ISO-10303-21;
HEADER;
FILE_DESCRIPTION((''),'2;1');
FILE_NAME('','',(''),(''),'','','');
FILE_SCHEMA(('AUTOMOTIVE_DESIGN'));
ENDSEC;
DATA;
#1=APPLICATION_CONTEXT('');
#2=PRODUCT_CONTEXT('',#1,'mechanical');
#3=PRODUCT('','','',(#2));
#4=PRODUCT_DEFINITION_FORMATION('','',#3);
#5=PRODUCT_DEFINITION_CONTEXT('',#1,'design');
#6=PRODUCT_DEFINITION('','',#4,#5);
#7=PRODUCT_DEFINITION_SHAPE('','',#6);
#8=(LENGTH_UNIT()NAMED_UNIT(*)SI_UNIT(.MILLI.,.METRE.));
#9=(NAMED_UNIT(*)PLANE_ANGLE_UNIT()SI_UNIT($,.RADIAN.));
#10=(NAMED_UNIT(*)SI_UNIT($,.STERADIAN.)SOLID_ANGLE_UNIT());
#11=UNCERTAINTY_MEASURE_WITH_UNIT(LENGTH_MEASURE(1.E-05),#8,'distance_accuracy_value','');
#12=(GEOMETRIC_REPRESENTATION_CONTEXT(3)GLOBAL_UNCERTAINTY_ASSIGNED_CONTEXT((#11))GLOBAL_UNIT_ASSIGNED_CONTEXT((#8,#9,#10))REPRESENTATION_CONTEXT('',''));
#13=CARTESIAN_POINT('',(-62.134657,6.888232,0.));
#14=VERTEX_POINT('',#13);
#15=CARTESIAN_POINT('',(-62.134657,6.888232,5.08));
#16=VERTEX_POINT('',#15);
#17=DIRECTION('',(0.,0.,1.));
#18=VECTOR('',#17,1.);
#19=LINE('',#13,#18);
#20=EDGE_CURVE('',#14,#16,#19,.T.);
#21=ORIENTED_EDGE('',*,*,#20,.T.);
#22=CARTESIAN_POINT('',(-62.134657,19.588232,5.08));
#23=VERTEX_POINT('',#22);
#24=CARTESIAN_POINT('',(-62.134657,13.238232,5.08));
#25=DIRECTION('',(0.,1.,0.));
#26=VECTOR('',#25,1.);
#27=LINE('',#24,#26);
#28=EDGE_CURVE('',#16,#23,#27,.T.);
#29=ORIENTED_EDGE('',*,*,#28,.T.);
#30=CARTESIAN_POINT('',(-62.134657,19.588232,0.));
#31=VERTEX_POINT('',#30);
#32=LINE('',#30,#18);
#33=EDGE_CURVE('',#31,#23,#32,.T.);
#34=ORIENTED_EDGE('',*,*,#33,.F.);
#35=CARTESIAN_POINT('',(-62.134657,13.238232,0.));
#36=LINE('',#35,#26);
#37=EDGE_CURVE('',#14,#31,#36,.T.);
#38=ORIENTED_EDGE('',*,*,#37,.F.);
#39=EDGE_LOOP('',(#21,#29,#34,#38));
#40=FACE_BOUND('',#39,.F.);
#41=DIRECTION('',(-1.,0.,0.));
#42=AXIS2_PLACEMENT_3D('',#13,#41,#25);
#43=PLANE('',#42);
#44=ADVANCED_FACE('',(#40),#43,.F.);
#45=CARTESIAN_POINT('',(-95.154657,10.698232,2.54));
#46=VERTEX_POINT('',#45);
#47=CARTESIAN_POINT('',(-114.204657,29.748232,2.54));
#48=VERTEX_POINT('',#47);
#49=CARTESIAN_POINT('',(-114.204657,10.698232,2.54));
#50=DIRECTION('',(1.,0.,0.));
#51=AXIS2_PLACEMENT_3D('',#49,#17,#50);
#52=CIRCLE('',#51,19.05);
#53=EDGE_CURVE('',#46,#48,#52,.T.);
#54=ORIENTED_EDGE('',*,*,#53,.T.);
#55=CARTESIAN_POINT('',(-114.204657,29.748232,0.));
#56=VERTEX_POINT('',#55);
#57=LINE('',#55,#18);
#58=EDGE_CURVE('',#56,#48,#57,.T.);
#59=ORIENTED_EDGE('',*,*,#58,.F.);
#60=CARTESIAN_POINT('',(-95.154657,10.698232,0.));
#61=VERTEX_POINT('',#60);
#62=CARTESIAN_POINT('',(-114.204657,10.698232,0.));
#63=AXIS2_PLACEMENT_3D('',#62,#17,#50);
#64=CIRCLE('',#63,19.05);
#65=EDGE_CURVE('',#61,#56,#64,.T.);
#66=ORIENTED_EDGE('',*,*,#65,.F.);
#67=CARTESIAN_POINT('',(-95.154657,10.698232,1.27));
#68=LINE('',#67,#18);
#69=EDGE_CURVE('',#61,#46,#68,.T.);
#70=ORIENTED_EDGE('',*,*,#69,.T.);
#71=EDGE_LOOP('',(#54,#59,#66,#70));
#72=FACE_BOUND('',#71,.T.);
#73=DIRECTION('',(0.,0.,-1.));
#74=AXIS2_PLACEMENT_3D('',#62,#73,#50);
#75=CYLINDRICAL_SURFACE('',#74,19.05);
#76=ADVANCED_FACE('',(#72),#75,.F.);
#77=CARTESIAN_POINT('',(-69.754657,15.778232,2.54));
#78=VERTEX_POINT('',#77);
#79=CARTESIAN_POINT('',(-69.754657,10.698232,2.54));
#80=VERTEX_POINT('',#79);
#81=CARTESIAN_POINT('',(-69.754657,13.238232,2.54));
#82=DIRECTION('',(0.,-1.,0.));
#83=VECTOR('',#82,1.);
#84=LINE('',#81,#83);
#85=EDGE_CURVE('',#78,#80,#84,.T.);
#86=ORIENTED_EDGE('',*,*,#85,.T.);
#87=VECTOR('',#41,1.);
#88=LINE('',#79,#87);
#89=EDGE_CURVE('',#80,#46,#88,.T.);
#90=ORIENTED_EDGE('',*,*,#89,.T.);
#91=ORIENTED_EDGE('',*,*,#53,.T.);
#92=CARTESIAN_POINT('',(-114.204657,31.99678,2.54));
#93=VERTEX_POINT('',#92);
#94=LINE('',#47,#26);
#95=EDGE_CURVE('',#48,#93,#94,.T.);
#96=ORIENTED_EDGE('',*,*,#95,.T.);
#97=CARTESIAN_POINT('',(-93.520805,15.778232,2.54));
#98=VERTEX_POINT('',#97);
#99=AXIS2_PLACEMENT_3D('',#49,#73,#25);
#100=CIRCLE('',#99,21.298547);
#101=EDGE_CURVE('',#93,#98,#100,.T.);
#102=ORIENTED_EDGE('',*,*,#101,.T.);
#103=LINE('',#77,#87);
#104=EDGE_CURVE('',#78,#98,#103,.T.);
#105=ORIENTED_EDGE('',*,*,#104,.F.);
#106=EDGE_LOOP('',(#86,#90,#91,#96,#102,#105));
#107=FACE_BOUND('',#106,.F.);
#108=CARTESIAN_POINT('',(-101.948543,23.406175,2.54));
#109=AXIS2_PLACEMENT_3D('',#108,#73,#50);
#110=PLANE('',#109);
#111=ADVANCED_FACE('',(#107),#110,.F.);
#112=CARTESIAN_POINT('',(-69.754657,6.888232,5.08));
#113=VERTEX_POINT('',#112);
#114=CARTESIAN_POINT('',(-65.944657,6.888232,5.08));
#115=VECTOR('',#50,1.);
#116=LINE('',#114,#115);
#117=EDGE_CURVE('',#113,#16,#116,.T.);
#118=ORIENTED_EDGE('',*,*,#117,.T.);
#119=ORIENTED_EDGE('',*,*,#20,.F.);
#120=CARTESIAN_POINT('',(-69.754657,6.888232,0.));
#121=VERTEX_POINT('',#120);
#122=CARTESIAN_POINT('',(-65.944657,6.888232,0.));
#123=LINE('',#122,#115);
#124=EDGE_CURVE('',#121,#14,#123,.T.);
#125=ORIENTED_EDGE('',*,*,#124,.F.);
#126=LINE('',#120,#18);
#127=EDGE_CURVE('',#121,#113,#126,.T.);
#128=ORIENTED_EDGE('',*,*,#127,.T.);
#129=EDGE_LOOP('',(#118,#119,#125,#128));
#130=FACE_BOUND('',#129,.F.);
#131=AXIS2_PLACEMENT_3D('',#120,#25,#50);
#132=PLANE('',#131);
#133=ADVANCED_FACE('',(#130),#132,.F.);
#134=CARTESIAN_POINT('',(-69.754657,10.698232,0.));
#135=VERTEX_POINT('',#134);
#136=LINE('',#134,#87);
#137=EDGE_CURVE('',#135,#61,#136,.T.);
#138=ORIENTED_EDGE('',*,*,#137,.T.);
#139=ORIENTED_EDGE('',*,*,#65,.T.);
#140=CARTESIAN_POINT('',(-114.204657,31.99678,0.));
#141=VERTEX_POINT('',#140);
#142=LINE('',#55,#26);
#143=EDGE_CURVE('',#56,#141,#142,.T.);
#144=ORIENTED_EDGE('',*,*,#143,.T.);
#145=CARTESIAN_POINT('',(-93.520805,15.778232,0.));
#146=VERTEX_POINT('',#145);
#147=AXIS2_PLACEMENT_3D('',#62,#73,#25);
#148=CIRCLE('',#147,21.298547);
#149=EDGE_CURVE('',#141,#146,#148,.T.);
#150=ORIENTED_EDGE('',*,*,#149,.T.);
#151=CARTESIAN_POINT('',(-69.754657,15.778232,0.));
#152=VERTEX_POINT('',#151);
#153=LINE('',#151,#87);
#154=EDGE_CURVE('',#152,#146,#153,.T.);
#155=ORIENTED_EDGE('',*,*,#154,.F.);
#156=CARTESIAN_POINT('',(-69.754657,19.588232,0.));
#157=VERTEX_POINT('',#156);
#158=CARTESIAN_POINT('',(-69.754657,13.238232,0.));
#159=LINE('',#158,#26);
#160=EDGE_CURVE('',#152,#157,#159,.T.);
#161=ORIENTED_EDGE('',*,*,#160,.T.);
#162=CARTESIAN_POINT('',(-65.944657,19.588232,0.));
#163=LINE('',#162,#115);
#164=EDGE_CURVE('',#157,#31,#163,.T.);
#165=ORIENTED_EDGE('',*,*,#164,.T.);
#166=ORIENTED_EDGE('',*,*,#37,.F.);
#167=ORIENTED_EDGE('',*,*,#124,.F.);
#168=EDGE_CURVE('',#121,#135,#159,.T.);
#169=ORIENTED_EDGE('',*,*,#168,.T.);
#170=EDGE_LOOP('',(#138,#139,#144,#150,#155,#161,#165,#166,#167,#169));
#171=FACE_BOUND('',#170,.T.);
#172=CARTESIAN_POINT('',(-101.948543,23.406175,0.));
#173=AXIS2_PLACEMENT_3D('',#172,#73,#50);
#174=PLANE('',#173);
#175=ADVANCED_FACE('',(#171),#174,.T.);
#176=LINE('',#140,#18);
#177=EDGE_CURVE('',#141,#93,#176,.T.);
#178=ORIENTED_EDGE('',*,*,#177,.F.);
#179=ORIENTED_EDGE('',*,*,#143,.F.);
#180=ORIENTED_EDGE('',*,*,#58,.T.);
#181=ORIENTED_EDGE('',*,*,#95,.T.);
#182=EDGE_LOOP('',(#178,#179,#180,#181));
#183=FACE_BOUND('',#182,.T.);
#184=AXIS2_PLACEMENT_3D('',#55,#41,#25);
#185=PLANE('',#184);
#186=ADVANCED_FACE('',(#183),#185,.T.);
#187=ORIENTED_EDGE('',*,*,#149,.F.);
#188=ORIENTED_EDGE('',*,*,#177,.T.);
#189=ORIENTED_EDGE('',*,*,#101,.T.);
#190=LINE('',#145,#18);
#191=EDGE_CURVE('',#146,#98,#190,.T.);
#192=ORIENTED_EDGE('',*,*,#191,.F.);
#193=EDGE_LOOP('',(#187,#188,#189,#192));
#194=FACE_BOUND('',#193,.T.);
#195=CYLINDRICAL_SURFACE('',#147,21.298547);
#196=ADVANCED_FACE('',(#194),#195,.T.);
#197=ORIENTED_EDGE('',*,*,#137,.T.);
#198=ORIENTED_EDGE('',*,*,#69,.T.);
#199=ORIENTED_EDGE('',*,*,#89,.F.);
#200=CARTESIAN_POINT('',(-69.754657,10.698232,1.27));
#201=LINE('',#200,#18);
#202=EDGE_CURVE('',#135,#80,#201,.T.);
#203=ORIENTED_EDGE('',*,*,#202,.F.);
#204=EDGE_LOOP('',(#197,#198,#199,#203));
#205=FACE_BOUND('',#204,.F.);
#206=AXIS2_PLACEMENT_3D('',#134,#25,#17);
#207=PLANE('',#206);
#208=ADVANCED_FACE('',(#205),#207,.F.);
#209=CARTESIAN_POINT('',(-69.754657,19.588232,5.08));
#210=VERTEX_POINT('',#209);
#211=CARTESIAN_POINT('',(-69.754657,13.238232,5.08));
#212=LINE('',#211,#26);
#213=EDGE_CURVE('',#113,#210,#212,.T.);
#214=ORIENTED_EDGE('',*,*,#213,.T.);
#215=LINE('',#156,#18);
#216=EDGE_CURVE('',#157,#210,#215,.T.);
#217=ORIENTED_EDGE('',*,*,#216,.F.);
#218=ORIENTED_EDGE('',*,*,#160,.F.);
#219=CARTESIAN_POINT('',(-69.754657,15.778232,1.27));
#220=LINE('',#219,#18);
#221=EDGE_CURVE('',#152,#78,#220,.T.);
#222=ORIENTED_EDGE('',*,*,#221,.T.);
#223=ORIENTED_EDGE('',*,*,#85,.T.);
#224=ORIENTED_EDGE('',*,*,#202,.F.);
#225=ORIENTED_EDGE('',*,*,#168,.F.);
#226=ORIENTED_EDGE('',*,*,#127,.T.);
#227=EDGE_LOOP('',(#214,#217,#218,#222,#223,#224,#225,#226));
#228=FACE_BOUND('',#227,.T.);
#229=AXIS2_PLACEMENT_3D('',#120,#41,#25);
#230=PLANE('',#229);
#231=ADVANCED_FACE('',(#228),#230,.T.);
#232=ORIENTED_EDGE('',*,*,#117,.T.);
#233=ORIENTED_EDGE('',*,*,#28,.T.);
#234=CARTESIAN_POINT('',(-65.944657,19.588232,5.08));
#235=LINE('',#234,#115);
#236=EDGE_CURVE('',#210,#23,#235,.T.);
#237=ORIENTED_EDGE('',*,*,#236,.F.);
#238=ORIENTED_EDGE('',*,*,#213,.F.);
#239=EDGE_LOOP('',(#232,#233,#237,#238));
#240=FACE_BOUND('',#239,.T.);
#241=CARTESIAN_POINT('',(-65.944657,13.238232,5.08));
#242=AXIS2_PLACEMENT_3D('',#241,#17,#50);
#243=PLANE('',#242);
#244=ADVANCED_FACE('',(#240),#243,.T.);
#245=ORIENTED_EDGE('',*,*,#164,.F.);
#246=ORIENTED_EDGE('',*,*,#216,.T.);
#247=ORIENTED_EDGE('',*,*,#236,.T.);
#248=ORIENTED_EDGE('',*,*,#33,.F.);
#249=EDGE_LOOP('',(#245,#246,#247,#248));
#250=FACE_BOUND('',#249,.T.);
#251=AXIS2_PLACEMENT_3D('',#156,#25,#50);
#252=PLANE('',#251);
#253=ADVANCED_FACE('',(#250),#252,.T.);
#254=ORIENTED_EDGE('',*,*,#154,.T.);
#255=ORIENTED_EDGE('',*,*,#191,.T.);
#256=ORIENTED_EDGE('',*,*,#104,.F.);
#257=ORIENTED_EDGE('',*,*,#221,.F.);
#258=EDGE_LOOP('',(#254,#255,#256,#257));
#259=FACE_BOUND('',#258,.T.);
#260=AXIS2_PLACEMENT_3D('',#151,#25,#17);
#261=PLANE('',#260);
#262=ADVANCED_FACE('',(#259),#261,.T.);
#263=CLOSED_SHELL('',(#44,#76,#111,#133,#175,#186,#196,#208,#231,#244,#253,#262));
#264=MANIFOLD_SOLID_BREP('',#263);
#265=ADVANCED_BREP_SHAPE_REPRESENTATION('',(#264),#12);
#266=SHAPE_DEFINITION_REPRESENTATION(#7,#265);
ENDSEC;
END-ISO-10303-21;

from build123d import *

# Parameters (mm, degrees)
F0_W     = 7.62
F0_H     = 12.7
F1_DEPTH = 5.08
F2_W     = 5.08
F2_H     = 2.54
F3_DEPTH = 25.4
F5_DEPTH = 2.54


# Not quite as in the source:
# - a feature names something its author has since deleted; it is built from what else it names


with BuildPart() as f1:
    # F0 (on Top) → F1 (new body)
    with BuildSketch(Plane.XY):
        with Locations((-65.9446567297, 13.238232059)):
            Rectangle(F0_W, F0_H)
    extrude(amount=F1_DEPTH)

    # F2 (on face) → F3 (join)
    with BuildSketch(Plane(origin=(-69.7546567297, 0, 0), x_dir=(0, -1, 0), z_dir=(-1, 0, 0))):
        with Locations((-13.238232059, 1.27)):
            Rectangle(F2_W, F2_H)
    extrude(amount=F3_DEPTH)

    # F4 (on face) → F5 (join)
    with BuildSketch(Plane(origin=(0, 0, 0), x_dir=(1, 0, 0), z_dir=(0, 0, -1))):
        with BuildLine():
            Line((-93.5208049366, -15.778232059), (-95.1546567297, -15.778232059))
            Line((-95.1546567297, -15.778232059), (-95.1546567297, -10.698232059))
            ThreePointArc((-95.1546567297, -10.698232059), (-100.7342725481, -24.1686162406), (-114.2046567297, -29.748232059))
            Line((-114.2046567297, -29.748232059), (-114.2046567297, -31.9967795447))
            ThreePointArc((-114.2046567297, -31.9967795447), (-101.0625202258, -27.4586727786), (-93.5208049366, -15.778232059))
        make_face()
    extrude(amount=-F5_DEPTH)


solid = f1.part
